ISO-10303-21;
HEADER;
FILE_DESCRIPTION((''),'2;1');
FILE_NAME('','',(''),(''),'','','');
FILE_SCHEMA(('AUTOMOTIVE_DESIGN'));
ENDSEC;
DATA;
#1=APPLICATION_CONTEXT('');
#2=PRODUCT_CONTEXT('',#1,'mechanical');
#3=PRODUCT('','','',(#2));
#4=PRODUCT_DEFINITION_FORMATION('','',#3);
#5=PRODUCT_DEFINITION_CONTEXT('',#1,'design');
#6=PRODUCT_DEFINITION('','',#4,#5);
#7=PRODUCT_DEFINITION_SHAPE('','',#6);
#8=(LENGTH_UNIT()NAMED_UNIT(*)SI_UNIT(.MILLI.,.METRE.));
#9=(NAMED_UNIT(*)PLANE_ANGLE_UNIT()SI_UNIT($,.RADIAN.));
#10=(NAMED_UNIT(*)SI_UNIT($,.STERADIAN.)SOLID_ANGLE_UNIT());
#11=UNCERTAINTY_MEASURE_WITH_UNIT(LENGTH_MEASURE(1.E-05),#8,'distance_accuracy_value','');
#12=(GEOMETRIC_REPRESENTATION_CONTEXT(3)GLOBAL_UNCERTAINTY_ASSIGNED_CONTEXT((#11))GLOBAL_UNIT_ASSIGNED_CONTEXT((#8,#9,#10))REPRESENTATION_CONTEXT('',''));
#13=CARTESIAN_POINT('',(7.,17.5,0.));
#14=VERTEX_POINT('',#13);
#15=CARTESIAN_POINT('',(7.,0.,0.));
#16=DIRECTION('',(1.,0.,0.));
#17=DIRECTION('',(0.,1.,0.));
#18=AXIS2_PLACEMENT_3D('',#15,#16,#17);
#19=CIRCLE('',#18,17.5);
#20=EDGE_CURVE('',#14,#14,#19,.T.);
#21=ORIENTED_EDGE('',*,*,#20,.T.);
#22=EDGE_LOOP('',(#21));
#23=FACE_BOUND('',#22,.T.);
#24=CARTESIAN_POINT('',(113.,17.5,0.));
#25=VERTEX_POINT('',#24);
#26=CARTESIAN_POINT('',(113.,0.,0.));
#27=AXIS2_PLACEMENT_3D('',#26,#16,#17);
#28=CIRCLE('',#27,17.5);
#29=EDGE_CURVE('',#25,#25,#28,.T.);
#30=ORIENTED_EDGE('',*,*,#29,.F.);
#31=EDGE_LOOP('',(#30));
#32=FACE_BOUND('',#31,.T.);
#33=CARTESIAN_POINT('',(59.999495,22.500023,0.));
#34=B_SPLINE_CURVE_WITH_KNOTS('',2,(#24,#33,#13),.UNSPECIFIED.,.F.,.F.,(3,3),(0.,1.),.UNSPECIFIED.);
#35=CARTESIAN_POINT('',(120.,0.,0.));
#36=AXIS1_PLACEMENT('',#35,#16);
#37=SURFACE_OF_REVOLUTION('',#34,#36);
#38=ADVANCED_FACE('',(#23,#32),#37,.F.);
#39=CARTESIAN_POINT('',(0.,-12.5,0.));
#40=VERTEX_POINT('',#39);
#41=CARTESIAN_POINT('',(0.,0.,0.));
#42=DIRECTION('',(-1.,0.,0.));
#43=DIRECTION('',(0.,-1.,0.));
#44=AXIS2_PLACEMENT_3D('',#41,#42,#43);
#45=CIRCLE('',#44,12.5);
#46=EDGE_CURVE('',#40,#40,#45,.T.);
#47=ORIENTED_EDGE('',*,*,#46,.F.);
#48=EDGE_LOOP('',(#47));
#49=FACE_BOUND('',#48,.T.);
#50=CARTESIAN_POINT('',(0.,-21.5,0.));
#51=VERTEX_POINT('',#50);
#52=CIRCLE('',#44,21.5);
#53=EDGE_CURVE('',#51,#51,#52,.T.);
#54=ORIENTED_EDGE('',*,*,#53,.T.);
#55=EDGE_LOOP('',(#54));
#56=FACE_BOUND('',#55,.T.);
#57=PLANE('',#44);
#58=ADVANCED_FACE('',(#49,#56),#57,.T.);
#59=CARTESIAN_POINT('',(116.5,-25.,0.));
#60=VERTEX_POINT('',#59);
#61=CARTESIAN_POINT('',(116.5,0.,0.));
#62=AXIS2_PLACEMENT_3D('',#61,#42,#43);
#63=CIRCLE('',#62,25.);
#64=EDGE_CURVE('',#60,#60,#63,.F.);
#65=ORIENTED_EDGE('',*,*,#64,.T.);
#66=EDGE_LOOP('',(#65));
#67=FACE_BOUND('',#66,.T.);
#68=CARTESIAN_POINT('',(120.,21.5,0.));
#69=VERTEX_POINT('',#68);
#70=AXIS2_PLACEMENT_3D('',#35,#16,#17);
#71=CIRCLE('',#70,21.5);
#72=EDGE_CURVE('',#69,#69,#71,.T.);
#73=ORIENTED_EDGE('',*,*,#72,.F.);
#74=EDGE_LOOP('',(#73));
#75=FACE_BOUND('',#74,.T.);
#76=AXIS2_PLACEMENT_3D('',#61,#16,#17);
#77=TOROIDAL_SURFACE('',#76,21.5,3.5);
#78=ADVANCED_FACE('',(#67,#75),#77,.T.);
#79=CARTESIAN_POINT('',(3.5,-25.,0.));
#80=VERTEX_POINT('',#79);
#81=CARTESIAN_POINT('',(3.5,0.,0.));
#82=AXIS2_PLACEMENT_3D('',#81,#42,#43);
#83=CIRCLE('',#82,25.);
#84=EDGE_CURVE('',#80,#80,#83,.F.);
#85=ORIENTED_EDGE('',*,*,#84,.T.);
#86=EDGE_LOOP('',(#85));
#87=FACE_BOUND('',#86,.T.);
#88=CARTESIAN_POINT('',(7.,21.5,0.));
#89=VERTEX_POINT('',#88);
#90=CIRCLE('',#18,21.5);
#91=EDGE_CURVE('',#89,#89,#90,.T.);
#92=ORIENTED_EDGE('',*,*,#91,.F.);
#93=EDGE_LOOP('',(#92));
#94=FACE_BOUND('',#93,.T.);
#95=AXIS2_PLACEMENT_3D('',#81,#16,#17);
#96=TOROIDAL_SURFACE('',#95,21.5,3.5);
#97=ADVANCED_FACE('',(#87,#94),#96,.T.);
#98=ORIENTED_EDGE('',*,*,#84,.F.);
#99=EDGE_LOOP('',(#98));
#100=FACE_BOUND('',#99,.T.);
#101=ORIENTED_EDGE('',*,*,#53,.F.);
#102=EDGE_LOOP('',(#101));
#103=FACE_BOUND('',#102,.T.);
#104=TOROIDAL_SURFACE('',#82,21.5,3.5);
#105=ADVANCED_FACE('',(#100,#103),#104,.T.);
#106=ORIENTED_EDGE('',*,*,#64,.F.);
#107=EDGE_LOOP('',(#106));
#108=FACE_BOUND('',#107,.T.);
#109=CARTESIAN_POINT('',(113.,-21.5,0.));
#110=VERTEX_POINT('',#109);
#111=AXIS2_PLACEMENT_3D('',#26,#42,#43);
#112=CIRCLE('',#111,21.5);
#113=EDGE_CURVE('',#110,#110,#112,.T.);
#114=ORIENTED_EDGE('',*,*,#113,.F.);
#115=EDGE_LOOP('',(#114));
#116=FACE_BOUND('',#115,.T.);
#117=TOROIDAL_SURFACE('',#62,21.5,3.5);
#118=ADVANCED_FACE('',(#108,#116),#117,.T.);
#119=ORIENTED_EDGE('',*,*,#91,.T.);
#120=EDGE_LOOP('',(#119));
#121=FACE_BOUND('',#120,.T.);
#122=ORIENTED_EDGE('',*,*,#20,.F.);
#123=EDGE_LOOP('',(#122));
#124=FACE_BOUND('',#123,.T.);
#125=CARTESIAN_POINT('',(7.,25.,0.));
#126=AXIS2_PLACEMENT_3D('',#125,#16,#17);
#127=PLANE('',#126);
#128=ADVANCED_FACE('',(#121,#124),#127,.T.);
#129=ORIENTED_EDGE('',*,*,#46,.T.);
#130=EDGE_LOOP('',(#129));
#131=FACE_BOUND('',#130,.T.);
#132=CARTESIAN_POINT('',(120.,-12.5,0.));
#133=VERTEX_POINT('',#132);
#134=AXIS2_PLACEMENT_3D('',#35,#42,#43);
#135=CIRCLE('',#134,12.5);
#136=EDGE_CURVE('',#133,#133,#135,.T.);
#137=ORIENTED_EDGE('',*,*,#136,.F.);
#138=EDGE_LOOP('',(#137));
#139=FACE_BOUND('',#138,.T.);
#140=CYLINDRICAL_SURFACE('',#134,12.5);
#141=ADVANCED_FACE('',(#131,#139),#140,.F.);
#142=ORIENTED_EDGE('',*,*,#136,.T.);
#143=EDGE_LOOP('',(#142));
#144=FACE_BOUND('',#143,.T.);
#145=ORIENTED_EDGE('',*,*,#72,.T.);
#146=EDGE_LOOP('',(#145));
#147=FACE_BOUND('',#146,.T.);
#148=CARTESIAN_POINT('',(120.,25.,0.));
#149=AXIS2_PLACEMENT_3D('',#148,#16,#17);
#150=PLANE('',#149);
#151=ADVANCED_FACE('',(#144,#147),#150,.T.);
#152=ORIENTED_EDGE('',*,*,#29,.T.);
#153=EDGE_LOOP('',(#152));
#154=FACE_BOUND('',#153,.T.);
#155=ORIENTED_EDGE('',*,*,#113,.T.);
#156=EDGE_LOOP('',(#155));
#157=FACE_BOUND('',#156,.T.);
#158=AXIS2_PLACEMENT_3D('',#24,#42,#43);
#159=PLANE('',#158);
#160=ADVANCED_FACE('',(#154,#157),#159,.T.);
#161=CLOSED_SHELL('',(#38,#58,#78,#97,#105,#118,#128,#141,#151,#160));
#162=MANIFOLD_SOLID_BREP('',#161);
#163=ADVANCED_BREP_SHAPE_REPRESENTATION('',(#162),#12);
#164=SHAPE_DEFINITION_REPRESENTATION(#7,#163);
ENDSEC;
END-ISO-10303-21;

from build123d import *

# Parameters (mm, degrees)
SKETCH2_R          = 12.5
CUT_EXTRUDE1_DEPTH = 126.099960032
FILLET2_R          = 3.5


with BuildPart() as part:
    # Sketch1 → Revolve1 (revolve)
    with BuildSketch(Plane.XY):
        with BuildLine():
            Line((0, 0), (0, 25))
            Line((0, 25), (7, 25))
            Line((7, 25), (7, 17.5))
            add(Edge.make_bspline(
                [(7, 17.5), (59.999495383, 22.500022889), (113, 17.5)],
                knots=[0, 0, 0, 1, 1, 1], degree=2))
            Line((113, 17.5), (113, 25))
            Line((113, 25), (120, 25))
            Line((120, 25), (120, 0))
            Line((120, 0), (0, 0))
        make_face()
    revolve(axis=Axis((120, 0, 0), (-1, 0, 0)))

    # Sketch2 → Cut-Extrude1 (cut, through all)
    with BuildSketch(Plane.ZY):
        with Locations(Location((0, 0, 0), (0, 0, 270))):
            Circle(SKETCH2_R)
    extrude(amount=-CUT_EXTRUDE1_DEPTH, mode=Mode.SUBTRACT)

    # Fillet2
    fillet2_edges = [part.edges().sort_by_distance(p)[0] for p in [
        (0, -25, 0),
        (7, -25, 0),
        (113, -25, 0),
        (120, -25, 0),
    ]]
    fillet(fillet2_edges, radius=FILLET2_R - 0.0001)  # a hair under: the kernel refuses the full size


solid = part.part
